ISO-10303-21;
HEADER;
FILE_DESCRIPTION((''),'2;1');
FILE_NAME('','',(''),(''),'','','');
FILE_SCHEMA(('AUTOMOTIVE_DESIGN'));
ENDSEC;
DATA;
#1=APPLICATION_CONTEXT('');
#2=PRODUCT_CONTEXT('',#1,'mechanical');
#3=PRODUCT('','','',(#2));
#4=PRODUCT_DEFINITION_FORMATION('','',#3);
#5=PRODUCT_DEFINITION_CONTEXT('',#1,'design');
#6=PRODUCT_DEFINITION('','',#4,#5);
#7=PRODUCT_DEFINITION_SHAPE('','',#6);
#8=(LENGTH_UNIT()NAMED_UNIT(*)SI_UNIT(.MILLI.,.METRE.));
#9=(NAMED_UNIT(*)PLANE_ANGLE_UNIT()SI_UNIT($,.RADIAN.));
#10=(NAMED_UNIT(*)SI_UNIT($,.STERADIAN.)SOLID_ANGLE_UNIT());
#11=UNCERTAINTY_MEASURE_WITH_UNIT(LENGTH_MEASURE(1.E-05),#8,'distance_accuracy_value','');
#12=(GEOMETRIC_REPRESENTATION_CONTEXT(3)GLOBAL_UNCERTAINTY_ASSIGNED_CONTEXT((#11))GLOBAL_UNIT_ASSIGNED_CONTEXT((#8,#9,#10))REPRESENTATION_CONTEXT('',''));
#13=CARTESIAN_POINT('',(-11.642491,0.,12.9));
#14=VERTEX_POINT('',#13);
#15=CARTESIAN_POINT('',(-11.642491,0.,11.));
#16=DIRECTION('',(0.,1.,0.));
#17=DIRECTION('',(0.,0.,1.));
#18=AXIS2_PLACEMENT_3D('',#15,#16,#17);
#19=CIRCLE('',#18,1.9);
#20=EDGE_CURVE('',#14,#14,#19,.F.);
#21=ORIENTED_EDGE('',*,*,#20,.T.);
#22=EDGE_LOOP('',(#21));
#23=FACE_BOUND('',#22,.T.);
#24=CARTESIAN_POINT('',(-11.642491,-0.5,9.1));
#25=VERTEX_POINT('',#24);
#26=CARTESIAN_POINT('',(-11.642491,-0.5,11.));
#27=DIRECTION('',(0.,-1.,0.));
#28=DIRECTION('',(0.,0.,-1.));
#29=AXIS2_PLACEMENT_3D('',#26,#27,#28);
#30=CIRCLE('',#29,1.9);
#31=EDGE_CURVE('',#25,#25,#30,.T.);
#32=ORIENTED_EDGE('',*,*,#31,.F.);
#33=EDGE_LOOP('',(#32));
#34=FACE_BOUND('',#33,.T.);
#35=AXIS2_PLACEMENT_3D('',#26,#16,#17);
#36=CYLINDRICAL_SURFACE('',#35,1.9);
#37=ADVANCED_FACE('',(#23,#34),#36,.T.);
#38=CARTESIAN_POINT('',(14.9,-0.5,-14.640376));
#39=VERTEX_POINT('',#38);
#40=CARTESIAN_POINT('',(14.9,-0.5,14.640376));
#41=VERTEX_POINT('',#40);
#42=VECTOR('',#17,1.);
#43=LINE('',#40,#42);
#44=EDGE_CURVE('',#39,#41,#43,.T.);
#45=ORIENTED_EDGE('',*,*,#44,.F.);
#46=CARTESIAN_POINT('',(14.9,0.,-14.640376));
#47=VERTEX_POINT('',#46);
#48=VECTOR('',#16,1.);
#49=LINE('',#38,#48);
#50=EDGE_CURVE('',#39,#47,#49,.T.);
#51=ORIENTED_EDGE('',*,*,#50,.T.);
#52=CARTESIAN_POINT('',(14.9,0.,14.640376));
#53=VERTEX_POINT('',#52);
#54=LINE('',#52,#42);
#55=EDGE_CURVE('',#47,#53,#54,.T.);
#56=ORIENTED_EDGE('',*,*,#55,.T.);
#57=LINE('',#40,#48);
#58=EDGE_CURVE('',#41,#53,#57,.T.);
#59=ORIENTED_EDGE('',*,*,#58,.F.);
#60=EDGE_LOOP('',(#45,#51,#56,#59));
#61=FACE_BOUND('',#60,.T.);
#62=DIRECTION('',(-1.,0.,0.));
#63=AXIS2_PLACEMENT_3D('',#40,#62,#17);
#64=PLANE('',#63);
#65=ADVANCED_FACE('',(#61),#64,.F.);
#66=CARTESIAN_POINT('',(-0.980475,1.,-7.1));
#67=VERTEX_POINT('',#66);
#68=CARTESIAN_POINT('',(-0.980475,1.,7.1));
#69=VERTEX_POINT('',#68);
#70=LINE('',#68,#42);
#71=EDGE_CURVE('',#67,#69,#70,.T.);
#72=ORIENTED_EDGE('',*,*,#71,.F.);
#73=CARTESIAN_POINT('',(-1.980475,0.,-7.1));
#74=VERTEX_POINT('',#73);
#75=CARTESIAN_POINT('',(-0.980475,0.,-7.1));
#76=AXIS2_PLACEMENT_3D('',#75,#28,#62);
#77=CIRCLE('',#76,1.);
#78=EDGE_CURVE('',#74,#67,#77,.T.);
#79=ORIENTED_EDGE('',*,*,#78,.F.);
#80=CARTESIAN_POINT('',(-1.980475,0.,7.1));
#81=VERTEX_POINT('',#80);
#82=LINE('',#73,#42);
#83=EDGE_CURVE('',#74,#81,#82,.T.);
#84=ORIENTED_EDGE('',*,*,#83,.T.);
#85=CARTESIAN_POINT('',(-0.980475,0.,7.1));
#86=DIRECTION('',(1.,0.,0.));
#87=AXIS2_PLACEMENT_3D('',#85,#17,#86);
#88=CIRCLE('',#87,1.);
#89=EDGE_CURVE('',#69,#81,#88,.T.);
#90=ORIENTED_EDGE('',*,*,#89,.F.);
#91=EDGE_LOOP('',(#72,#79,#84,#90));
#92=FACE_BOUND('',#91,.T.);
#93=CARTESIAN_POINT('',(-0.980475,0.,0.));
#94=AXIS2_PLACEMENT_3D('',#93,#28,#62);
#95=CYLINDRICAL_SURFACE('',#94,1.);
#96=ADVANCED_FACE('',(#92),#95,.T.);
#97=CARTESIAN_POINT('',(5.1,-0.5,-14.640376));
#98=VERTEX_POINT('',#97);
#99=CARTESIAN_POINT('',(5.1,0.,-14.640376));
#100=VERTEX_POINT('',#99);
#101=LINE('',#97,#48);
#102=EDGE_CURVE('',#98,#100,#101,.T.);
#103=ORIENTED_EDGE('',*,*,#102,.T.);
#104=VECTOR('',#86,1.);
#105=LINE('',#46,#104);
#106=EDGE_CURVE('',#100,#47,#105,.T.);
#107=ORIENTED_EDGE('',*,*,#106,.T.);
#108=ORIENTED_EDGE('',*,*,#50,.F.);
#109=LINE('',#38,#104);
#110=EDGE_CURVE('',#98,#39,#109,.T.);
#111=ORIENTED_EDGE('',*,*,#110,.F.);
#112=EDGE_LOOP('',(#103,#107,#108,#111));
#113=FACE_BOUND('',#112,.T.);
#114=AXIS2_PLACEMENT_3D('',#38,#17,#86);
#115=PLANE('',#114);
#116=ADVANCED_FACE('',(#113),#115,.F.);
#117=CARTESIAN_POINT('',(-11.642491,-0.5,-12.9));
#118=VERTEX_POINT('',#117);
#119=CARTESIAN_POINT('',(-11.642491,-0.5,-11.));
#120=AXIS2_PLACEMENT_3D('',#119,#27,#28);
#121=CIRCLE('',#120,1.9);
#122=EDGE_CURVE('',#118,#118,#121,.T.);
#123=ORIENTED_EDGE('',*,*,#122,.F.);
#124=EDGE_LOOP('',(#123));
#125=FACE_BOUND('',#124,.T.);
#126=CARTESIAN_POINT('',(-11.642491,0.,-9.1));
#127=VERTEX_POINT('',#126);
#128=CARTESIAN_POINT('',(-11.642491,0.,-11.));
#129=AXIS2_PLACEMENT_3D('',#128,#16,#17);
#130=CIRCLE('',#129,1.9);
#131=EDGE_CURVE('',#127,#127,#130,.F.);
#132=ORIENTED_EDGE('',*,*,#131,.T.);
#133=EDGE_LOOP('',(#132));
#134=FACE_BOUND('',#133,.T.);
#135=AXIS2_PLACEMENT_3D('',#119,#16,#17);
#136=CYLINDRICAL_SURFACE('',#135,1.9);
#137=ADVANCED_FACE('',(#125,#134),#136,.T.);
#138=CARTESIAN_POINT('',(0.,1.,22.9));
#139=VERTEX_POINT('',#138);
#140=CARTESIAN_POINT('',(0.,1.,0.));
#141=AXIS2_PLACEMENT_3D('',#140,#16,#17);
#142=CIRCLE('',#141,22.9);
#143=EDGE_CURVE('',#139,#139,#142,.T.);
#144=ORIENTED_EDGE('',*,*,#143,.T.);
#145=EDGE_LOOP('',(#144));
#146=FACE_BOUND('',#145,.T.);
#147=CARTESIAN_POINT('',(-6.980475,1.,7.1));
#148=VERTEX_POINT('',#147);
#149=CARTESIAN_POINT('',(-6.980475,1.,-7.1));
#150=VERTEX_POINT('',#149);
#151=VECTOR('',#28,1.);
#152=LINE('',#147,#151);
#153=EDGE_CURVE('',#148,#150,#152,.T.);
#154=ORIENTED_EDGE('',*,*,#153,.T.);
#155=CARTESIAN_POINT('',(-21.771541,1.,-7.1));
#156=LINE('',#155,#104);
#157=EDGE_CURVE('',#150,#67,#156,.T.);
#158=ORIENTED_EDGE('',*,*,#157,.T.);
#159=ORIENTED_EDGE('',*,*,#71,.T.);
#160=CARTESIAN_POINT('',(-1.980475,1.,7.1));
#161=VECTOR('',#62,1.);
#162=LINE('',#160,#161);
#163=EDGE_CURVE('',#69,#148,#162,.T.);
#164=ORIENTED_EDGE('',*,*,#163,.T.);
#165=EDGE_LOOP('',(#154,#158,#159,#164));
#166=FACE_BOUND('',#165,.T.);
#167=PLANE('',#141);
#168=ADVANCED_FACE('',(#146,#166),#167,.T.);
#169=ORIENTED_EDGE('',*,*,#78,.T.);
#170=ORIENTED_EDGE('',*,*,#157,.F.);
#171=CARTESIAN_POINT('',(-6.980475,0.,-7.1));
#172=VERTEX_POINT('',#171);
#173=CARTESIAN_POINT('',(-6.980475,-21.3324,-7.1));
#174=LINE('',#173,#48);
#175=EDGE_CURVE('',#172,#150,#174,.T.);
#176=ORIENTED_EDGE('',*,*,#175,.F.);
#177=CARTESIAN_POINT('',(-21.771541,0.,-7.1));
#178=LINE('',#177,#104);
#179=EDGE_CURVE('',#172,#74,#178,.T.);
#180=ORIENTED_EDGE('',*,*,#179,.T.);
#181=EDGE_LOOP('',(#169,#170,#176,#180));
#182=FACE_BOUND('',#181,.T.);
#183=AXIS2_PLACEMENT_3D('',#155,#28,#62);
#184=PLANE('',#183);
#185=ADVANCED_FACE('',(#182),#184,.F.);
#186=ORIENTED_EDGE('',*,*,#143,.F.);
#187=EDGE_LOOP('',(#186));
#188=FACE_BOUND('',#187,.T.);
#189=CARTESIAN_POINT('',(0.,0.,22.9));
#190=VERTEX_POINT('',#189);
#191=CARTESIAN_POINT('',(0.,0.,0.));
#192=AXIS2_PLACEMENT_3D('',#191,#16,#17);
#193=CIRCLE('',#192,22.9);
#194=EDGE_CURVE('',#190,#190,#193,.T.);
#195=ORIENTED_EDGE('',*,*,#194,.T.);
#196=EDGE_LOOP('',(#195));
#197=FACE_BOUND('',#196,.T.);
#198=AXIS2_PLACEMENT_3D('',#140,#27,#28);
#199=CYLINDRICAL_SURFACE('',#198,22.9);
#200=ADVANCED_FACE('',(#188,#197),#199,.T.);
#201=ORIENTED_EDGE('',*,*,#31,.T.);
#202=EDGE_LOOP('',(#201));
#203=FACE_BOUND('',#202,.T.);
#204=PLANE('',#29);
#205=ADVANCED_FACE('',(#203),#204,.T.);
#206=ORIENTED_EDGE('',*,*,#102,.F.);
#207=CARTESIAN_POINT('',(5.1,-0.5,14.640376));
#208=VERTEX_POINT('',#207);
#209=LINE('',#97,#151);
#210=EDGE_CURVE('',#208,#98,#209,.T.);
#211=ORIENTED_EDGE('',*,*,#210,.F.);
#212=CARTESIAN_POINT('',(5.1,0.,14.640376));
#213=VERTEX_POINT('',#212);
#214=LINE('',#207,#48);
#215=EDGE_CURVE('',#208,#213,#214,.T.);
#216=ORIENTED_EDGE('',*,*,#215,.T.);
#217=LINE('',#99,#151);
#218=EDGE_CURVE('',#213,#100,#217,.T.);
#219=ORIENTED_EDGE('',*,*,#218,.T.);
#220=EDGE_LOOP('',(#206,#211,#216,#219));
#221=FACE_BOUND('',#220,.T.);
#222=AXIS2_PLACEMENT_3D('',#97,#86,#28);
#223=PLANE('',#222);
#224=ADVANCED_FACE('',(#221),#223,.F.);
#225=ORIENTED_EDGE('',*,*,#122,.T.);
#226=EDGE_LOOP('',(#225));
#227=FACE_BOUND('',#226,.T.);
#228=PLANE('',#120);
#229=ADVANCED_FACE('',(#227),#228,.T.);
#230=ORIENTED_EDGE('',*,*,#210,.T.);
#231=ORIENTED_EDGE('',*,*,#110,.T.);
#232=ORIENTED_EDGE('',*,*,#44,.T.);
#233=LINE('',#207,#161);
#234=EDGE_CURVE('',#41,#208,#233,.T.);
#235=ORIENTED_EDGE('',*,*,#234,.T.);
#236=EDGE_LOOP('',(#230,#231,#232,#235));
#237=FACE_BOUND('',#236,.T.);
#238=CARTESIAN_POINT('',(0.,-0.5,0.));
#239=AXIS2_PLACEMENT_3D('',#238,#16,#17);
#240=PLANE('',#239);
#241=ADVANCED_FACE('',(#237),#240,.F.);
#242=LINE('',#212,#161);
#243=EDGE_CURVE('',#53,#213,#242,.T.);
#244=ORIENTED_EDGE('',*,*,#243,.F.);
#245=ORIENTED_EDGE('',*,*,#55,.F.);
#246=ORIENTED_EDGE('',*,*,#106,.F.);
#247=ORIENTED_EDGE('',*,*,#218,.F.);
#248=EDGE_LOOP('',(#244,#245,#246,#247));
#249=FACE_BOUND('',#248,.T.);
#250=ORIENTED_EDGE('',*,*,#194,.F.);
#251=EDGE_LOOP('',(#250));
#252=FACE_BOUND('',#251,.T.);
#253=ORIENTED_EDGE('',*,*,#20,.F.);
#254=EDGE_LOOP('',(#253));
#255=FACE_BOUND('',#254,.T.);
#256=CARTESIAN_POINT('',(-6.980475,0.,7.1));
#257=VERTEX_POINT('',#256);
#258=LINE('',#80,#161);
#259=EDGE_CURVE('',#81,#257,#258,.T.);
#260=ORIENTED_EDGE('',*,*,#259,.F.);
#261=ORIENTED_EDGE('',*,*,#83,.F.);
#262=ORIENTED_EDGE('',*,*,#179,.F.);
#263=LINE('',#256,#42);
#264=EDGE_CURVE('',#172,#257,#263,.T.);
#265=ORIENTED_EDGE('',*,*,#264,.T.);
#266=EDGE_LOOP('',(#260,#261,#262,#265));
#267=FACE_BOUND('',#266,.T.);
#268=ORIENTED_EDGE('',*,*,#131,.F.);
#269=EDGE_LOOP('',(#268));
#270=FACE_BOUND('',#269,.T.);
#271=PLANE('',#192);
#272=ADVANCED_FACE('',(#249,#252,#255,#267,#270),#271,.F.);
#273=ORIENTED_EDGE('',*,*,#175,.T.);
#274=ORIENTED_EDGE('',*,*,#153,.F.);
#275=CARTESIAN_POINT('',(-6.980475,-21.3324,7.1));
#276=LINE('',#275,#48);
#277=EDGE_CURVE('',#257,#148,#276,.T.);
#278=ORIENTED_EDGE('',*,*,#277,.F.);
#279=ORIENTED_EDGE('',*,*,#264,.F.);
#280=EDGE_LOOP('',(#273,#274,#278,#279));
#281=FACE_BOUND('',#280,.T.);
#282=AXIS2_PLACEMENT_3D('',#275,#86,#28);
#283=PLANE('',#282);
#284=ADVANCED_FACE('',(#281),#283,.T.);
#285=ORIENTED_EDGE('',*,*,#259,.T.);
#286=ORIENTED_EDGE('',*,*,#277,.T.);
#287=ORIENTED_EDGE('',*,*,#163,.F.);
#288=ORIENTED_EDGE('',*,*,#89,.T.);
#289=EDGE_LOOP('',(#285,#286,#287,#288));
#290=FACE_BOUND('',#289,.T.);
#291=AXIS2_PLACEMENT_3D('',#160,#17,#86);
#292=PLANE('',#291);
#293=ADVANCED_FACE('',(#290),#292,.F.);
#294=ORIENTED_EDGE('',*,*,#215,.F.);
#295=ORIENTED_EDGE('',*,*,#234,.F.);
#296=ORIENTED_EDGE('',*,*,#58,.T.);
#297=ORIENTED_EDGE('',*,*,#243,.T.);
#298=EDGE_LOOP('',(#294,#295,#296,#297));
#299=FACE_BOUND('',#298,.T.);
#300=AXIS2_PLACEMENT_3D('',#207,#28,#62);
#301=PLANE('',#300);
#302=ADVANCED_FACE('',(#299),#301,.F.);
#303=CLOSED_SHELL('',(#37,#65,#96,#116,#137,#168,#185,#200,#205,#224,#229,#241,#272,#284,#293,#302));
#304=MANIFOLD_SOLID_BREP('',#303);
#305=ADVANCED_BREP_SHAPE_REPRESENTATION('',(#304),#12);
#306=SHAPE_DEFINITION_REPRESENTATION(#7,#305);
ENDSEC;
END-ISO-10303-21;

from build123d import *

# Parameters (mm, degrees)
BOSS_EXTRUDE1_DEPTH = 1
SKETCH2_R           = 1.9
SKETCH2_W           = 9.8
SKETCH2_H           = 29.28075205
BOSS_EXTRUDE2_DEPTH = 0.5
FILLET1_R           = 1
BOSS_EXTRUDE3_START = -1
BOSS_EXTRUDE3_DEPTH = 1


with BuildPart() as part:
    # Sketch1 → Boss-Extrude1 (new body)
    with BuildSketch(Plane(origin=(0, 0, 0), x_dir=(1, 0, 0), z_dir=(0, 1, 0))):
        with BuildLine():
            Line((-21.771541057, 7.1), (-1.980475175, 7.1))
            Line((-1.980475175, 7.1), (-1.980475175, -7.1))
            Line((-1.980475175, -7.1), (-21.771541057, -7.1))
            ThreePointArc((-21.771541057, -7.1), (22.9, 0), (-21.771541057, 7.1))
        make_face()
    extrude(amount=BOSS_EXTRUDE1_DEPTH)

    # Sketch2 → Boss-Extrude2 (add)
    with BuildSketch(Plane.XZ):
        with Locations(Location((-11.642490831, 11, 0), (0, 0, 90))):
            Circle(SKETCH2_R)
        with Locations(Location((-11.642490831, -11, 0), (0, 0, 90))):
            Circle(SKETCH2_R)
        with Locations((10, 0)):
            Rectangle(SKETCH2_W, SKETCH2_H)
    extrude(amount=BOSS_EXTRUDE2_DEPTH)

    # Fillet1
    fillet1_edges = [part.edges().sort_by_distance(p)[0] for p in [
        (-1.980475175, 1, 0),
    ]]
    fillet(fillet1_edges, radius=FILLET1_R - 0.0001)  # a hair under: the kernel refuses the full size

    # Sketch3 → Boss-Extrude3 (add)
    with BuildSketch(Plane(origin=(0, 1, 0), x_dir=(1, 0, 0), z_dir=(0, 1, 0)).offset(BOSS_EXTRUDE3_START)):
        with BuildLine():
            Line((-6.980475175, -7.1), (-21.771541057, -7.1))
            ThreePointArc((-21.771541057, -7.1), (-22.9, 0), (-21.771541057, 7.1))
            Line((-21.771541057, 7.1), (-6.980475175, 7.1))
            Line((-6.980475175, 7.1), (-6.980475175, -7.1))
        make_face()
    extrude(amount=BOSS_EXTRUDE3_DEPTH)


solid = part.part
